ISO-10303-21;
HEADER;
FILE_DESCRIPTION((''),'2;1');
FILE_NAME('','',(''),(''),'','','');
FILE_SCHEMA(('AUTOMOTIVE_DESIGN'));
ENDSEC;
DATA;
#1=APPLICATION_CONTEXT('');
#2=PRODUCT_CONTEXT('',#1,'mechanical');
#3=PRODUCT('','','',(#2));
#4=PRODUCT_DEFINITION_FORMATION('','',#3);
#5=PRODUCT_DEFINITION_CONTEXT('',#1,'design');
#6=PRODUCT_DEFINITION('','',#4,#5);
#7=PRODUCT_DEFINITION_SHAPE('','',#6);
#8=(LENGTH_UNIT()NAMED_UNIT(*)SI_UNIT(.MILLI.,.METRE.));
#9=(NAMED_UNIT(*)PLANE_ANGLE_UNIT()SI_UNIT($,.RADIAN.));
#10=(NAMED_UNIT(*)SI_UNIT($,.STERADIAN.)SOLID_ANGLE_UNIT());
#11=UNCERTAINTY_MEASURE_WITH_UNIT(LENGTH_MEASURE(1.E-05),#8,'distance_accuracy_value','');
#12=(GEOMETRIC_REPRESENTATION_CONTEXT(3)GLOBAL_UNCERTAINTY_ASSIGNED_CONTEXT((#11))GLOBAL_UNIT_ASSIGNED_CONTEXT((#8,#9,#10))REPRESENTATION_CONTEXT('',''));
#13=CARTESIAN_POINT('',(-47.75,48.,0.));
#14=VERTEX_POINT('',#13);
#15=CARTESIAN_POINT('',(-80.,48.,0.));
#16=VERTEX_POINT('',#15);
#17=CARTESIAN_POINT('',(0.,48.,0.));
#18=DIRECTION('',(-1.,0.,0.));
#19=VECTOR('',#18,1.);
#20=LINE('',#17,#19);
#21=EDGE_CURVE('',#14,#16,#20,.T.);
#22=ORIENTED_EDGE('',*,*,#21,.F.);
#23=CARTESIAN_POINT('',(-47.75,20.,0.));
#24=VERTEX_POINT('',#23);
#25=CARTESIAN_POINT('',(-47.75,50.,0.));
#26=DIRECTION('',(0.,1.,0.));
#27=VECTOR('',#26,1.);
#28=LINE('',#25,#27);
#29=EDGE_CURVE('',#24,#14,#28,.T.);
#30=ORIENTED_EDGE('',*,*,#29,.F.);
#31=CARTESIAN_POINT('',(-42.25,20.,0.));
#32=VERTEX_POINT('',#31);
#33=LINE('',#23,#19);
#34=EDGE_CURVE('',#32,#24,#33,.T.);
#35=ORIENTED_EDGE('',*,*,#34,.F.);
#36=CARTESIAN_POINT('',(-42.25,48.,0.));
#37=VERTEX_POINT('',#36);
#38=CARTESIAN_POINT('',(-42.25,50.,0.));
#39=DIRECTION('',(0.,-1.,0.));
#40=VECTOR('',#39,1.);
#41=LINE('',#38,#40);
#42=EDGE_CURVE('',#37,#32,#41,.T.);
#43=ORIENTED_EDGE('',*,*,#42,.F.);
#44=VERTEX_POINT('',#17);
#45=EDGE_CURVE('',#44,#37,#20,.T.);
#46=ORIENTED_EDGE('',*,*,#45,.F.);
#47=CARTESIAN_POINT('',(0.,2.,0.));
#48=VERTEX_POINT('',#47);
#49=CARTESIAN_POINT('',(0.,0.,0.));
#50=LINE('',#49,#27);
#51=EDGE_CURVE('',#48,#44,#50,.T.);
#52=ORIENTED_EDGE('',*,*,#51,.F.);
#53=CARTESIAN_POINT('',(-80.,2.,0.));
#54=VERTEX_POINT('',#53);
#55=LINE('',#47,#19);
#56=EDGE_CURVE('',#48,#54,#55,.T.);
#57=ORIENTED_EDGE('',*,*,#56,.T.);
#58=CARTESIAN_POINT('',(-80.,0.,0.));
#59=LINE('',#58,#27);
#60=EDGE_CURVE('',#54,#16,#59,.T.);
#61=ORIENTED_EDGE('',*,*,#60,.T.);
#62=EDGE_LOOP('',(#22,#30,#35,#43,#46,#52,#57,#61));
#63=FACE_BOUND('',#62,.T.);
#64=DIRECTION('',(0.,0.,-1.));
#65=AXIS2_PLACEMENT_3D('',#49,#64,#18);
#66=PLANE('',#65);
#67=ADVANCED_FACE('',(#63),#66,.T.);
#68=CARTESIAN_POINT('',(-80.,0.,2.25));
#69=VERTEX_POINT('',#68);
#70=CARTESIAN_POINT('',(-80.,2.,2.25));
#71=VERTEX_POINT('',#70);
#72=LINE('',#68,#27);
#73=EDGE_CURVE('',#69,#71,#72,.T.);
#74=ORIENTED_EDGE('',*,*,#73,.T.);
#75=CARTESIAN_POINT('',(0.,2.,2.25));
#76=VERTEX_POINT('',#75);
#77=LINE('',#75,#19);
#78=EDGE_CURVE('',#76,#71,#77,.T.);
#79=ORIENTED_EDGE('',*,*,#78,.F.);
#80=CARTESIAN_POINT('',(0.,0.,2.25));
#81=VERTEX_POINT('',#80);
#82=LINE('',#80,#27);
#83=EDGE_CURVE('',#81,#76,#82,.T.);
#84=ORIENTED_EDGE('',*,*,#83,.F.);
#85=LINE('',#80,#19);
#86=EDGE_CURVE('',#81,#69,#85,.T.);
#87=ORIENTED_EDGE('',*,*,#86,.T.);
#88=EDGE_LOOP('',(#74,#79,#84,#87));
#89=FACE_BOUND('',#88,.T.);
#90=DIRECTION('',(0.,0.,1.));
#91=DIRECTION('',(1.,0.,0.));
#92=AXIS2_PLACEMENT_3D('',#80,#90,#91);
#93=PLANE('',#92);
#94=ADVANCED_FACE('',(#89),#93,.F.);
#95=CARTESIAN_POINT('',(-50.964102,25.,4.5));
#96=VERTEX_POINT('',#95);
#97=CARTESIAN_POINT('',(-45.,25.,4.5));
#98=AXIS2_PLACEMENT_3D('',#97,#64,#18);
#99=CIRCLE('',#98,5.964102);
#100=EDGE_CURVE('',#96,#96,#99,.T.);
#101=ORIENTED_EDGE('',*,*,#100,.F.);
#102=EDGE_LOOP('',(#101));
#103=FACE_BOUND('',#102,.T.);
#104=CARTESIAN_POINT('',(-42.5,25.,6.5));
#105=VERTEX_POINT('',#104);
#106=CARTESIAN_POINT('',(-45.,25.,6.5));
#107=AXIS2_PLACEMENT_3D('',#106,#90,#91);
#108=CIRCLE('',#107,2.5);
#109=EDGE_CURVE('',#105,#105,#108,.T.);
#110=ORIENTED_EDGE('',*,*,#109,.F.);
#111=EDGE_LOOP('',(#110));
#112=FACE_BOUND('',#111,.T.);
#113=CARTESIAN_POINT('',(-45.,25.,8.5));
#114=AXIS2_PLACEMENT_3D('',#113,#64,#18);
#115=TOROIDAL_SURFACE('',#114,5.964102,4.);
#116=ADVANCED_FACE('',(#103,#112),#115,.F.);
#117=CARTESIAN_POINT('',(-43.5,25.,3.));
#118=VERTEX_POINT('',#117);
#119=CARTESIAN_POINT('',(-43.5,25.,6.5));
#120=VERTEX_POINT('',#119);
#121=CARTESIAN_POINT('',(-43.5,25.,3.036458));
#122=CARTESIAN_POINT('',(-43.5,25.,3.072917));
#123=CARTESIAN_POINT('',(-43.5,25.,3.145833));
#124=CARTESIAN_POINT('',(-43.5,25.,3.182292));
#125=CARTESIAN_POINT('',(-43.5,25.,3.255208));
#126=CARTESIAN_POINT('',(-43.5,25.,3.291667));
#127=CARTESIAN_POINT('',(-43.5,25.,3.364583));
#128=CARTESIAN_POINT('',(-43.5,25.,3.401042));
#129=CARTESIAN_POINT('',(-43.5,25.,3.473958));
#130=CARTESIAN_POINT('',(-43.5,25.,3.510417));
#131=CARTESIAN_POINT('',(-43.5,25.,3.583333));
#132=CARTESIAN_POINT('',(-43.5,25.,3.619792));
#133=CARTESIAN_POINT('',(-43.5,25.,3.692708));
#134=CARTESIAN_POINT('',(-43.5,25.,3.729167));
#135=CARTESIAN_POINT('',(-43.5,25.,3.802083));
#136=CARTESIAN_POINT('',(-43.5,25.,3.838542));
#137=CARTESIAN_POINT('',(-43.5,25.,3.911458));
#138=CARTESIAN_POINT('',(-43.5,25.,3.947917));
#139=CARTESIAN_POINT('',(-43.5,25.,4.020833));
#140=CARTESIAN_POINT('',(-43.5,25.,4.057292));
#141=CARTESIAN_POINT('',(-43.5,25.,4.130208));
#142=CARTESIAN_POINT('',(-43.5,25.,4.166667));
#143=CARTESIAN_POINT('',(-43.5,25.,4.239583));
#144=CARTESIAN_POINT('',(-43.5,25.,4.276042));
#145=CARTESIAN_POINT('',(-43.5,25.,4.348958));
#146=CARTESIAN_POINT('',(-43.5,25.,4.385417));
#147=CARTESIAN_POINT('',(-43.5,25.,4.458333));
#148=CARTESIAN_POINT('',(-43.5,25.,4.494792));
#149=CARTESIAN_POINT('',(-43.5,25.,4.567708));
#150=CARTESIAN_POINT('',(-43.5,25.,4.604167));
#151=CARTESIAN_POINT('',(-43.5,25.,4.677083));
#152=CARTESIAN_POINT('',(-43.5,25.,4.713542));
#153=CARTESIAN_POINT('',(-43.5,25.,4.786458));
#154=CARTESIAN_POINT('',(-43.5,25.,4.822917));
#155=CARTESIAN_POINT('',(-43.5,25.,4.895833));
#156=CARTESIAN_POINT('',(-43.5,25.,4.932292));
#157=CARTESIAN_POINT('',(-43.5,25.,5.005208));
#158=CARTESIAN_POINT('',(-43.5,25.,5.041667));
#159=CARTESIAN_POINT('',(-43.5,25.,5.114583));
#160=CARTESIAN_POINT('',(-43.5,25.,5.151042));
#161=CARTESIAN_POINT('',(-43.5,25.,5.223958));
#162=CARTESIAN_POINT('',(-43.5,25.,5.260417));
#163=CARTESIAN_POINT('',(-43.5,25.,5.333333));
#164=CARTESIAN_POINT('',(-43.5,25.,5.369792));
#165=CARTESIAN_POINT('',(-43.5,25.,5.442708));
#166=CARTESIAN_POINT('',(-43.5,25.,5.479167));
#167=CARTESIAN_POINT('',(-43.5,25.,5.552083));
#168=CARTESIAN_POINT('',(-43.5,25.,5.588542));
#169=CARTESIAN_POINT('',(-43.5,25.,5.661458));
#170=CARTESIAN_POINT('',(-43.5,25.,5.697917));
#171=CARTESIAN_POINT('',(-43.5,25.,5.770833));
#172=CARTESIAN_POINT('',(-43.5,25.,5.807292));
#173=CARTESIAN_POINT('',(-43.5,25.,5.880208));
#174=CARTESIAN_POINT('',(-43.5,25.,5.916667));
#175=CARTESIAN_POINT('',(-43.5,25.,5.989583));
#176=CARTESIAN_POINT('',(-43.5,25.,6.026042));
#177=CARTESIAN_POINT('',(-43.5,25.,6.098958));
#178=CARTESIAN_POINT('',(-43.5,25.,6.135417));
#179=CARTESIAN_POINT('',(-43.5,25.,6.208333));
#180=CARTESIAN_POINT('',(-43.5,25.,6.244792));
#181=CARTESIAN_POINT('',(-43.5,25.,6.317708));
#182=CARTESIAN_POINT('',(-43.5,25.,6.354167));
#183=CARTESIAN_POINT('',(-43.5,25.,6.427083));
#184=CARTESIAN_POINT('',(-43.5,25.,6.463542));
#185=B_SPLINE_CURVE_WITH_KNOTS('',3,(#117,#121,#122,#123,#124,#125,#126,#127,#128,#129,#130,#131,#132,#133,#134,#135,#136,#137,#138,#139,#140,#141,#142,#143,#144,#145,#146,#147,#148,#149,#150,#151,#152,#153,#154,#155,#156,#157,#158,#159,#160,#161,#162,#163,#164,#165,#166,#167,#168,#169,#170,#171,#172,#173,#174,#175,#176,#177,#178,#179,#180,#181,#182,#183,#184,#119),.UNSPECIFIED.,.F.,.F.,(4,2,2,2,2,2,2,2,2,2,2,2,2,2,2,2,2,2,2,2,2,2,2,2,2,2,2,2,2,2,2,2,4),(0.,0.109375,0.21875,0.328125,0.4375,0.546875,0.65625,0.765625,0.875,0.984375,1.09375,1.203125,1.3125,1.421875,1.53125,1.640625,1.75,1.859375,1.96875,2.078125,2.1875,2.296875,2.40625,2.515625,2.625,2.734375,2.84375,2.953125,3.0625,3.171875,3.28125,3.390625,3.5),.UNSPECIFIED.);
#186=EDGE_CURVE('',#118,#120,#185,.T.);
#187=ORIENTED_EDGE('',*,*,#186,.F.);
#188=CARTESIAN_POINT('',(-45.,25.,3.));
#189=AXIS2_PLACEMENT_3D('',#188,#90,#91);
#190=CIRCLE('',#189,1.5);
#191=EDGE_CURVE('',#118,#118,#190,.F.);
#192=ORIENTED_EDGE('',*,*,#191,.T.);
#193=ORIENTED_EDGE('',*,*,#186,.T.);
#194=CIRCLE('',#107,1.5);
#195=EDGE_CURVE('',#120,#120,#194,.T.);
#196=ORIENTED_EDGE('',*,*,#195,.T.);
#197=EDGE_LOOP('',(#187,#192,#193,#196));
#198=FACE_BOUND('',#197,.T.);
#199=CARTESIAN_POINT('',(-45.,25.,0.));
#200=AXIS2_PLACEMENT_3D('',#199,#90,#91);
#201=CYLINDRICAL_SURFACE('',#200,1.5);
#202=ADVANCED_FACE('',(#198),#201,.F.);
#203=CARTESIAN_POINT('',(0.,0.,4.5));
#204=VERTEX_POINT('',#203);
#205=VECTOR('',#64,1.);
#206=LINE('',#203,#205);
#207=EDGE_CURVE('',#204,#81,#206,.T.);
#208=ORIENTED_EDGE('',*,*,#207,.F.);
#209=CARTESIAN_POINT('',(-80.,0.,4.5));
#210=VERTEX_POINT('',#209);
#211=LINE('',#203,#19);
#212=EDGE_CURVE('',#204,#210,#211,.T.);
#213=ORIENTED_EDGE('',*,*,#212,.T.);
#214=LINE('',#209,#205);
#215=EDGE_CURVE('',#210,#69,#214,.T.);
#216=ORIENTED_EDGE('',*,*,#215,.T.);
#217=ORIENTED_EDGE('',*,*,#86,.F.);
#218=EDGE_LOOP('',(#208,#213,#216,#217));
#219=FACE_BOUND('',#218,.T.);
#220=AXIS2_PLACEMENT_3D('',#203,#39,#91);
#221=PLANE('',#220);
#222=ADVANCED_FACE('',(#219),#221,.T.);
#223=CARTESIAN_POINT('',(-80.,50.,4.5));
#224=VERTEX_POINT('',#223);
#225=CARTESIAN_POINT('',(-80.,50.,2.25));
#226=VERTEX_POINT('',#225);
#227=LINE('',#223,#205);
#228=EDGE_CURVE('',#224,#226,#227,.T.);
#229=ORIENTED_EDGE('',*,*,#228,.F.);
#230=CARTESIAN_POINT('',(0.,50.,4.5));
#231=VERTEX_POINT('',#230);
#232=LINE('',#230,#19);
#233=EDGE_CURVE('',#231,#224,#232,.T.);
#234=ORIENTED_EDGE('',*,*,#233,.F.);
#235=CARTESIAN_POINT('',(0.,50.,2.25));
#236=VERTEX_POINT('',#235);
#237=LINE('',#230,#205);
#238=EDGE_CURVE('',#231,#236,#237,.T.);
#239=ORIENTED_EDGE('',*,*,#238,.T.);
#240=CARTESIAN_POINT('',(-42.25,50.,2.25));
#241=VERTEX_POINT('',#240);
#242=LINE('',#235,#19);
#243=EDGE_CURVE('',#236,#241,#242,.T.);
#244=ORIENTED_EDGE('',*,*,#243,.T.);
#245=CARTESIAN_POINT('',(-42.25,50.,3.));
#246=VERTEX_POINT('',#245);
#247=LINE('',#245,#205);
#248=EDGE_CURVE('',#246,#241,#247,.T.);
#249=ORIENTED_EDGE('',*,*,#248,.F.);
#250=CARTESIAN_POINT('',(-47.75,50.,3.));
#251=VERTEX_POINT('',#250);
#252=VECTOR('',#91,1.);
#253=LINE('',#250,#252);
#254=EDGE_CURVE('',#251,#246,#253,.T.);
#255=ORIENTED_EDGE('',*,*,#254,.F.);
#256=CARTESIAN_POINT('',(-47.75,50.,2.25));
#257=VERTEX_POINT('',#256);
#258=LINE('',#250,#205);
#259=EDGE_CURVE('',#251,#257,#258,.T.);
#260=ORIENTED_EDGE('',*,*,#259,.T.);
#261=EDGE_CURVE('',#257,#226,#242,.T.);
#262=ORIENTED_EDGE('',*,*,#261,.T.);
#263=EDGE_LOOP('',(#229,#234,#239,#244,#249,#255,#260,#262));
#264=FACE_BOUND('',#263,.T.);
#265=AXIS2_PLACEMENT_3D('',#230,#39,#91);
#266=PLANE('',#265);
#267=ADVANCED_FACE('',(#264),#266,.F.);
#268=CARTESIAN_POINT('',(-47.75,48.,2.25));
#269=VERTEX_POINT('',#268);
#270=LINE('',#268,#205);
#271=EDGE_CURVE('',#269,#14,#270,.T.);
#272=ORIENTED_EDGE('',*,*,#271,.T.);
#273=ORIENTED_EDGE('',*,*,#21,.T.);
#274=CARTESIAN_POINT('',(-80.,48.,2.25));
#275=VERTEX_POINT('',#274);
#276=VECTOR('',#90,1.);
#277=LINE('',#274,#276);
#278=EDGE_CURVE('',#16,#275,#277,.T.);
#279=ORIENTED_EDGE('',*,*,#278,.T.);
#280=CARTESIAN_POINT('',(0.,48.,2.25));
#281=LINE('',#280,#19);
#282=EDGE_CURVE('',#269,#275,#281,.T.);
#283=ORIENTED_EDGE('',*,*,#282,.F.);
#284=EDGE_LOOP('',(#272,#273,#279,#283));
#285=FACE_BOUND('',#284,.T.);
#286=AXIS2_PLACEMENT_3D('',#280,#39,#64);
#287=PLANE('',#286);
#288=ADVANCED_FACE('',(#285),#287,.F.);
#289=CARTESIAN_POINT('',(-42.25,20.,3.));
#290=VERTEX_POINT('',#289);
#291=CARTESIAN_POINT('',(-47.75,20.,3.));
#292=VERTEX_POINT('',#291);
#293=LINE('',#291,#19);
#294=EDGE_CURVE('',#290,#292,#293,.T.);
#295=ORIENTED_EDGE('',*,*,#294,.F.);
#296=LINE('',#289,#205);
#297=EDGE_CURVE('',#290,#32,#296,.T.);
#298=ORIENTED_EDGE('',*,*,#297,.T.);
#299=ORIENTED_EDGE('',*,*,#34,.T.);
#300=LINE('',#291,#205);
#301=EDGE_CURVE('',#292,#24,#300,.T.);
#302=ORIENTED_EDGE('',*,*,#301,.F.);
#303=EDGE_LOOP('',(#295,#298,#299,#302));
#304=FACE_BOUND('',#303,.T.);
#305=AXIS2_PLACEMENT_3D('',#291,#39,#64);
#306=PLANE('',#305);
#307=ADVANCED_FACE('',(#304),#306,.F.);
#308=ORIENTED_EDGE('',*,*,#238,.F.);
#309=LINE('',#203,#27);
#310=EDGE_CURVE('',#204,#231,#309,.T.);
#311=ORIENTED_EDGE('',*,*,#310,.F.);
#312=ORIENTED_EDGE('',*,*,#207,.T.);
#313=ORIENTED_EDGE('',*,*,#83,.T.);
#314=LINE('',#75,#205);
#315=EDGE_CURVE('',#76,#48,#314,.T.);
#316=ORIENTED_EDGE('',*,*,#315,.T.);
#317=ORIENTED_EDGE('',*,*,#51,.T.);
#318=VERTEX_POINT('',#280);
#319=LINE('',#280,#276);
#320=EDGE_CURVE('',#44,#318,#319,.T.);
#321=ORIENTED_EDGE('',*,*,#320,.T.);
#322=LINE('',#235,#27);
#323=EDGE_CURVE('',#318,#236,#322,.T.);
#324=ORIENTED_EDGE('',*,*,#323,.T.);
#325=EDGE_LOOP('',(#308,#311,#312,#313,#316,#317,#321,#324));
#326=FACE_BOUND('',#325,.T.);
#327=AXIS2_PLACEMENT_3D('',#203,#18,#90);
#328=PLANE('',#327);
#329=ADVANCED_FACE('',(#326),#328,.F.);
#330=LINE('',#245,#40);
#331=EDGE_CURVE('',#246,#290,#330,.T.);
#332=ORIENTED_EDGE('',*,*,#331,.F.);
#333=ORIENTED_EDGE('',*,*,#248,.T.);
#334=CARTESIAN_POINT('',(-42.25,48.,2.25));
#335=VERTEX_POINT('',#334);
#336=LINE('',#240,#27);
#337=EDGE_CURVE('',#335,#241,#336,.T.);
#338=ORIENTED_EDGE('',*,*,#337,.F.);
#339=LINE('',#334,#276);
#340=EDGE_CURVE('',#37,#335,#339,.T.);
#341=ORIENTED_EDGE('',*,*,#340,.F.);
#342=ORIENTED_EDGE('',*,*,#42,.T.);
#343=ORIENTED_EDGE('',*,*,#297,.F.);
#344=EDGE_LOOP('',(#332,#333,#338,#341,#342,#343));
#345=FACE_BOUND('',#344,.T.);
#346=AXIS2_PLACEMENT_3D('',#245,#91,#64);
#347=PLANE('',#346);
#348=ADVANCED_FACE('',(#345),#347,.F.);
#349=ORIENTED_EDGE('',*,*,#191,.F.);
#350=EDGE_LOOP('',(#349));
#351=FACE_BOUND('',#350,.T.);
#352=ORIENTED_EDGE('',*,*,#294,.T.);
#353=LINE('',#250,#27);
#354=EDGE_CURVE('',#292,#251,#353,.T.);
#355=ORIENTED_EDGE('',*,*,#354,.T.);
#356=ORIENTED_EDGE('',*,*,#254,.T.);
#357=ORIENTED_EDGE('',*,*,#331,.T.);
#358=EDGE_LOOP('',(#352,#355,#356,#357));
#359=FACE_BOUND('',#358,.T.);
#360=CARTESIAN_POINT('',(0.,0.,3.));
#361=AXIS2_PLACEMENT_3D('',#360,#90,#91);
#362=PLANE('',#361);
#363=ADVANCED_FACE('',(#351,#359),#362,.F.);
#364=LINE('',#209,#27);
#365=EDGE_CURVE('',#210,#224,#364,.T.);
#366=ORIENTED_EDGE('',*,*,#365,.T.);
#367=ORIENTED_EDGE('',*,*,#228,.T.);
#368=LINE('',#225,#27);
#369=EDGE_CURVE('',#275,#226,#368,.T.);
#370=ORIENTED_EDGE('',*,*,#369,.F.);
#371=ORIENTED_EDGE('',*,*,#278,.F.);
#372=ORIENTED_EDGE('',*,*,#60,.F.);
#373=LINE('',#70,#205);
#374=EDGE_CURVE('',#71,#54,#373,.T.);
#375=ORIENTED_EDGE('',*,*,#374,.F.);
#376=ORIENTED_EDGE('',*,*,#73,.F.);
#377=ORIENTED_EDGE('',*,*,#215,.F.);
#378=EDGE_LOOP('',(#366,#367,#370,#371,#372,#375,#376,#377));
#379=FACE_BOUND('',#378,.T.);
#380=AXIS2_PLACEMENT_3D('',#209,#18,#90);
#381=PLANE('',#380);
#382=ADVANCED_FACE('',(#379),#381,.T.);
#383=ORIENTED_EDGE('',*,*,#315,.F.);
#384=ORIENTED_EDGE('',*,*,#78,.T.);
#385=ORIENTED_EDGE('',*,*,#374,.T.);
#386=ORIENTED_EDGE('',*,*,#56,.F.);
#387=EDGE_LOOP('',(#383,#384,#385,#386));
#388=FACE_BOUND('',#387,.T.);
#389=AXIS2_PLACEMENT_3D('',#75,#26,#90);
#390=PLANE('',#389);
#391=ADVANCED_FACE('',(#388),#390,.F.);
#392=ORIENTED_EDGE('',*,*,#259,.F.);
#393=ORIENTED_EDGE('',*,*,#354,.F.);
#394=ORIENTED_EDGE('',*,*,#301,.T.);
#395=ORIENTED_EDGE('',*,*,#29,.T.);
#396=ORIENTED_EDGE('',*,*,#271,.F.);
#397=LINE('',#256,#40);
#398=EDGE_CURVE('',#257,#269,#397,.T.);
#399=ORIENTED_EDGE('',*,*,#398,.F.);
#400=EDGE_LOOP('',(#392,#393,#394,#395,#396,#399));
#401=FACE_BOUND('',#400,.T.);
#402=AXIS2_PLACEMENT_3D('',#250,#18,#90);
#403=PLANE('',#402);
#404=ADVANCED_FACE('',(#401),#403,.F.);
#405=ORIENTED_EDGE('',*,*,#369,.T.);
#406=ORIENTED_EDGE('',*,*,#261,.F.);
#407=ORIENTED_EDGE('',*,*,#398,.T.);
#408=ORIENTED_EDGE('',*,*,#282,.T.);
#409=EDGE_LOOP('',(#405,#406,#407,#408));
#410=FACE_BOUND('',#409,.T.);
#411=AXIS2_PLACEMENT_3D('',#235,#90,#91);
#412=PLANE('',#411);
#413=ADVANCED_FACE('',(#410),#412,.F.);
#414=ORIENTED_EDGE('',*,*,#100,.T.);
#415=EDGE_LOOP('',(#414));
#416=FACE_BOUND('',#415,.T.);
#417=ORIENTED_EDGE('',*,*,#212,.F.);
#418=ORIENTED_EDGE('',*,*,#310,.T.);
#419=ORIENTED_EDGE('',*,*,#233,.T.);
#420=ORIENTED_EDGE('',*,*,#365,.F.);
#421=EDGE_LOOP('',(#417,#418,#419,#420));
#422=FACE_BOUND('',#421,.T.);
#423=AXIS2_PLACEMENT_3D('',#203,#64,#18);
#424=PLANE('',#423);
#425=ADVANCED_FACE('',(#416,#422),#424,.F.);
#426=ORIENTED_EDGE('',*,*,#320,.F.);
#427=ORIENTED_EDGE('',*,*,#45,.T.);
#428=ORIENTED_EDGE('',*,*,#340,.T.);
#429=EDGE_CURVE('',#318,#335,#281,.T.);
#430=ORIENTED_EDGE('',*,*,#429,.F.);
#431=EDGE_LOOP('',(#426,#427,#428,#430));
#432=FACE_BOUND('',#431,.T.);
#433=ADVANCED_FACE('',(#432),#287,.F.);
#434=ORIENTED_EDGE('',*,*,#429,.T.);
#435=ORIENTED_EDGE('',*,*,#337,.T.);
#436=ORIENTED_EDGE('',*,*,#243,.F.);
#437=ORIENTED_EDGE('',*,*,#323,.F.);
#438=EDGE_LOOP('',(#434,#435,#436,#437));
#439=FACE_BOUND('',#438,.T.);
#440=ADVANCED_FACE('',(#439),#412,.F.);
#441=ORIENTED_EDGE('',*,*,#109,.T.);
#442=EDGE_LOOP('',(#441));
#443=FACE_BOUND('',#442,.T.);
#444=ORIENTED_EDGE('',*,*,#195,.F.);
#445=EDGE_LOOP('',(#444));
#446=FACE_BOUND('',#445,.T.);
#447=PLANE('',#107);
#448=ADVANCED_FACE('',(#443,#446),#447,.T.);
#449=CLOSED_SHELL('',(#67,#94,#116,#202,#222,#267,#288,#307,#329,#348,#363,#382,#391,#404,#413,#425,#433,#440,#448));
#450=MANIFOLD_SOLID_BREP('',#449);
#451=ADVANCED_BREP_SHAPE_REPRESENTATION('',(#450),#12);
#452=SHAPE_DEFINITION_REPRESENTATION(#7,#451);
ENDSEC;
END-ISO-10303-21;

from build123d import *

# Parameters (mm, degrees)
SKETCH1_W           = 50
SKETCH1_H           = 80
BOSS_EXTRUDE1_DEPTH = 4.5
SKETCH2_R           = 0.5
CUT_EXTRUDE1_DEPTH  = 95.447075127
SKETCH3_W           = 2
SKETCH3_H           = 2.25
CUT_EXTRUDE2_DEPTH  = 95.447075127
SKETCH5_R           = 2.5
BOSS_EXTRUDE2_DEPTH = 2
SKETCH6_R           = 1.5
CUT_EXTRUDE3_DEPTH  = 95.563470748
FILLET1_R           = 4
SKETCH8_W           = 5.5
SKETCH8_H           = 30
CUT_EXTRUDE4_DEPTH  = 3


with BuildPart() as part:
    # Sketch1 → Boss-Extrude1 (new body)
    with BuildSketch(Plane(origin=(0, 0, 0), x_dir=(0, 1, 0), z_dir=(0, 0, 1))):
        with Locations((25, 40)):
            Rectangle(SKETCH1_W, SKETCH1_H)
    extrude(amount=BOSS_EXTRUDE1_DEPTH)

    # Sketch2 → Cut-Extrude1 (cut, through all)
    with BuildSketch(Plane.XY.offset(4.5)):
        with Locations((-45, 25)):
            Circle(SKETCH2_R)
    extrude(amount=-CUT_EXTRUDE1_DEPTH, mode=Mode.SUBTRACT)

    # Sketch3 → Cut-Extrude2 (cut, through all)
    with BuildSketch(Plane(origin=(-80, 0, 0), x_dir=(0, -1, 0), z_dir=(-1, 0, 0))):
        with Locations((-49, 1.125)):
            Rectangle(SKETCH3_W, SKETCH3_H)
        with Locations((-1, 1.125)):
            Rectangle(SKETCH3_W, SKETCH3_H)
    extrude(amount=-CUT_EXTRUDE2_DEPTH, mode=Mode.SUBTRACT)

    # Sketch5 → Boss-Extrude2 (add)
    with BuildSketch(Plane.XY.offset(4.5)):
        with Locations(Location((-45, 25, 0), (0, 0, 180))):
            Circle(SKETCH5_R)
    extrude(amount=BOSS_EXTRUDE2_DEPTH)

    # Sketch6 → Cut-Extrude3 (cut, through all)
    with BuildSketch(Plane.XY.offset(6.5)):
        with Locations((-45, 25)):
            Circle(SKETCH6_R)
    extrude(amount=-CUT_EXTRUDE3_DEPTH, mode=Mode.SUBTRACT)

    # Fillet1
    # the kernel refuses this fillet: 4 mm, written as the material it adds along each edge
    with BuildSketch(Plane(origin=(-45, 25, 4.5), x_dir=(-1, 0, 0), z_dir=(0, 1, 0))) as fillet1_piece_1:
        with BuildLine():
            CenterArc((5.964101615, 4), FILLET1_R, 210, 60)
            Line((2.5, 2), (2.430717968, 1.96))
            ThreePointArc((2.430717968, 1.96), (2.42, 1), (2.42, 0))
            Line((2.42, 0), (2.5, -0.08))
            Line((2.5, -0.08), (5.964101615, -0.08))
            Line((5.964101615, -0.08), (5.964101615, 0))
        make_face()
    revolve(axis=Axis((-45, 25, 4.5), (0, 0, 1)))

    # Sketch8 → Cut-Extrude4 (cut)
    with BuildSketch(Plane(origin=(0, 0, 0), x_dir=(1, 0, 0), z_dir=(0, 0, -1))):
        with Locations((-45, -35)):
            Rectangle(SKETCH8_W, SKETCH8_H)
    extrude(amount=-CUT_EXTRUDE4_DEPTH, mode=Mode.SUBTRACT)


solid = part.part
